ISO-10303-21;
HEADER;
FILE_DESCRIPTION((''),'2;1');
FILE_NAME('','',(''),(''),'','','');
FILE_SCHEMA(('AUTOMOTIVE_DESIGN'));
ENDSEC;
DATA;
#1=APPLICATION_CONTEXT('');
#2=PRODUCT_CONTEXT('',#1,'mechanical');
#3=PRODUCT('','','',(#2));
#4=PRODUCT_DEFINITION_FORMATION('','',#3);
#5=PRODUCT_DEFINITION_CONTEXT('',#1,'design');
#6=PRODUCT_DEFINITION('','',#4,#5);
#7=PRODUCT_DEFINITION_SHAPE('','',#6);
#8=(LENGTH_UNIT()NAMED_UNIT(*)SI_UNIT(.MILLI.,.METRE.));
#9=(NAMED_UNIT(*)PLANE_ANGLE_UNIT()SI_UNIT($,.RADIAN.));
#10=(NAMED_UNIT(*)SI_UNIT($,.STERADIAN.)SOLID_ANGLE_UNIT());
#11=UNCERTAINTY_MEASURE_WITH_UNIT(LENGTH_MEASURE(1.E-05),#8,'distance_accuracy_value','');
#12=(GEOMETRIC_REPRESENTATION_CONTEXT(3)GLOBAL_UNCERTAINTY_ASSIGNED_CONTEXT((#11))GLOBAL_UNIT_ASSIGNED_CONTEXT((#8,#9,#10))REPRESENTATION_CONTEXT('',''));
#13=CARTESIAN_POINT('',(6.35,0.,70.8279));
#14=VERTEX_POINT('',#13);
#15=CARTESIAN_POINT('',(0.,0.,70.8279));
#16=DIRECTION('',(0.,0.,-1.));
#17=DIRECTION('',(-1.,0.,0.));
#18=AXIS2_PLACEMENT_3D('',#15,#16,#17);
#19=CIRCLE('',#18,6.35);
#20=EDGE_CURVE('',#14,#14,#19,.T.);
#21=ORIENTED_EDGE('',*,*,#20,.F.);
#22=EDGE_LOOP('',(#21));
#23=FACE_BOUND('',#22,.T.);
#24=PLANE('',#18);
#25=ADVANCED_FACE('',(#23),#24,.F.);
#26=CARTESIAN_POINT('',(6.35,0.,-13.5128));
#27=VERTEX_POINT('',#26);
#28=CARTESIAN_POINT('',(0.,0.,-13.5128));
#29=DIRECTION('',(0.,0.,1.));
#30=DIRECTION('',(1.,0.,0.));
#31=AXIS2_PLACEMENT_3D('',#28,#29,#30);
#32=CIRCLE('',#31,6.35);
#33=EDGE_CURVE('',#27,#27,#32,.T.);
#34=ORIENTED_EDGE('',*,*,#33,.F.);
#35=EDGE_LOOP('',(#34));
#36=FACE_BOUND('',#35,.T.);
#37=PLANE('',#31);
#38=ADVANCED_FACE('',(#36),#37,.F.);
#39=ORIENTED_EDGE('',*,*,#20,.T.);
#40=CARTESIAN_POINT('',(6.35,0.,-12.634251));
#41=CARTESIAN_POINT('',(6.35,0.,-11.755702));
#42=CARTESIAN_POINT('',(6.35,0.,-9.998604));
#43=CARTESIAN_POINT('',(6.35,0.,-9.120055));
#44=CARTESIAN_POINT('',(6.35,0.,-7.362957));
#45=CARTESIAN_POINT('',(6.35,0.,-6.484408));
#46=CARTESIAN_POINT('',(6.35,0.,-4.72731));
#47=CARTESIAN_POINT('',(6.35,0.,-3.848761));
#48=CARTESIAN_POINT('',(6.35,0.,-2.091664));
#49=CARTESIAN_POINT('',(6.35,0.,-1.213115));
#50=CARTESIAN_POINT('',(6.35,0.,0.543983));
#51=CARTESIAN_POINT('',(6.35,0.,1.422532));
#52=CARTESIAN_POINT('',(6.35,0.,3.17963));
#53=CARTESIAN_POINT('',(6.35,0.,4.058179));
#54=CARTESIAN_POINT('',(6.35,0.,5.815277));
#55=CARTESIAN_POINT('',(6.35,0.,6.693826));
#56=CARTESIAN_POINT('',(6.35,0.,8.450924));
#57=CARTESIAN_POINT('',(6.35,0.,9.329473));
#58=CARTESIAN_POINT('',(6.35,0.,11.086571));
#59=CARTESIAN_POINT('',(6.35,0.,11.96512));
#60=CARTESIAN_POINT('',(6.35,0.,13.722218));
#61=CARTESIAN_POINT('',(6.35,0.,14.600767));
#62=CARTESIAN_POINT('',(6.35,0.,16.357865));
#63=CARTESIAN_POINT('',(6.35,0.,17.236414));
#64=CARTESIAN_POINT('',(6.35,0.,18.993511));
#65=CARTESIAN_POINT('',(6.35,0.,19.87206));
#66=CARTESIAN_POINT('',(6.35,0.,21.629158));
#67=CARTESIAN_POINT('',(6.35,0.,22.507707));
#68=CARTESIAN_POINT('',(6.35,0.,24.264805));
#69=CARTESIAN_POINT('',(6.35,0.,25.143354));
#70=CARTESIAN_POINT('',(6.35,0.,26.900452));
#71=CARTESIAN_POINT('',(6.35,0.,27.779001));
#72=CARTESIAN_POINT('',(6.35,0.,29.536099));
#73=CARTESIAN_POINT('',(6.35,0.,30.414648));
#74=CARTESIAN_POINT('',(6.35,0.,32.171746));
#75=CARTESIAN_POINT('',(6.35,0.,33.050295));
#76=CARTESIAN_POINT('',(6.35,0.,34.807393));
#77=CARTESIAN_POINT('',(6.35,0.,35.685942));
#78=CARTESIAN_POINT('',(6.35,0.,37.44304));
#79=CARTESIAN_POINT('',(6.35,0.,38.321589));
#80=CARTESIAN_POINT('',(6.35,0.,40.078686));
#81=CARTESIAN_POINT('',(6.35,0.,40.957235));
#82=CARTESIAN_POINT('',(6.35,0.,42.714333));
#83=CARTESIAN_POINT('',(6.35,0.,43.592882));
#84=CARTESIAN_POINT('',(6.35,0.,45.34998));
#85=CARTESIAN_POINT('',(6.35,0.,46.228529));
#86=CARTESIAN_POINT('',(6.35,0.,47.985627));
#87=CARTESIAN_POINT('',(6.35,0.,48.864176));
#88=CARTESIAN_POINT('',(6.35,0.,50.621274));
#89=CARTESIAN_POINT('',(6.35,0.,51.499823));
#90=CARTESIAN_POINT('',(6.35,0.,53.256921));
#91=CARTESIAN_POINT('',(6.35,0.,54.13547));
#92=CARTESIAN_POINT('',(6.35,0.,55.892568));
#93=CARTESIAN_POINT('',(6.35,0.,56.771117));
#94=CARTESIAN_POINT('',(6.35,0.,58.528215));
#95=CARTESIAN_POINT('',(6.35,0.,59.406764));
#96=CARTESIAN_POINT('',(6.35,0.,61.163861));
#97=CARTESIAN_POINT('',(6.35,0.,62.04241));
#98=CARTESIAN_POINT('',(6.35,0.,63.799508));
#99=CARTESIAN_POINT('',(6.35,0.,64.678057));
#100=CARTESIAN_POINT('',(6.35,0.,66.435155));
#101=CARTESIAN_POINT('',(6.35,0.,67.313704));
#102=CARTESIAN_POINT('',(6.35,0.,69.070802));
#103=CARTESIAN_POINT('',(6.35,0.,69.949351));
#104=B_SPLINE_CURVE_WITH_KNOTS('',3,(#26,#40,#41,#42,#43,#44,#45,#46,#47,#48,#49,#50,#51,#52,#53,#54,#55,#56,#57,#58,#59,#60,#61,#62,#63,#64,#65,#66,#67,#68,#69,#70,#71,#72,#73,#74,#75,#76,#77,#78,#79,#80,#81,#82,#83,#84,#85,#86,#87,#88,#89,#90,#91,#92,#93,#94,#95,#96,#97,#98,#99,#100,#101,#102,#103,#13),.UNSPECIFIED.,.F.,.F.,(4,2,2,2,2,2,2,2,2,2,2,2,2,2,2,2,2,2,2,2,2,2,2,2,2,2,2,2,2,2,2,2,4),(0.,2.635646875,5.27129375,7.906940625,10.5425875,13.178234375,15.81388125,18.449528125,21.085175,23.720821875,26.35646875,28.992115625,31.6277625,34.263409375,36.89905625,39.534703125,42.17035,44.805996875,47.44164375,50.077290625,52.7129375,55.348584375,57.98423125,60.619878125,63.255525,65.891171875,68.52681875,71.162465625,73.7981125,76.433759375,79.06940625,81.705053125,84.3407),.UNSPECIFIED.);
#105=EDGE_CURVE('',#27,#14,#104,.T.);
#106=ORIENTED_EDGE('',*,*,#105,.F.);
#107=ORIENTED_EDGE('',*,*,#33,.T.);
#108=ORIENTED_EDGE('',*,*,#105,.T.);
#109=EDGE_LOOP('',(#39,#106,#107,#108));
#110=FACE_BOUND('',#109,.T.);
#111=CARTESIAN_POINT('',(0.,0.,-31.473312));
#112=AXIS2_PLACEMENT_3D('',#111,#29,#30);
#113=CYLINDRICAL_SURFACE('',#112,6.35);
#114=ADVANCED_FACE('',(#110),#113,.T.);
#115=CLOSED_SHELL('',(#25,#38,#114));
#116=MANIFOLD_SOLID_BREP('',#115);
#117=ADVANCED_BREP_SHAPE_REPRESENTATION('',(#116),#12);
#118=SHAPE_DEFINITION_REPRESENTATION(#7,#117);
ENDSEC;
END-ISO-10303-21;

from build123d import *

# Parameters (mm, degrees)
BOSS_EXTRUDE1_OUTLINE_R = 6.35
BOSS_EXTRUDE1_DEPTH     = 84.3407


# Read off the part's stored shape, not the designer's step: Boss-Extrude1
with BuildPart() as part:
    # Boss-Extrude1 outline → Boss-Extrude1 (new body)
    with BuildSketch(Plane(origin=(0, 0, 70.8279), x_dir=(-1, 0, 0), z_dir=(0, 0, -1))):
        Circle(BOSS_EXTRUDE1_OUTLINE_R)
    extrude(amount=BOSS_EXTRUDE1_DEPTH)


solid = part.part
